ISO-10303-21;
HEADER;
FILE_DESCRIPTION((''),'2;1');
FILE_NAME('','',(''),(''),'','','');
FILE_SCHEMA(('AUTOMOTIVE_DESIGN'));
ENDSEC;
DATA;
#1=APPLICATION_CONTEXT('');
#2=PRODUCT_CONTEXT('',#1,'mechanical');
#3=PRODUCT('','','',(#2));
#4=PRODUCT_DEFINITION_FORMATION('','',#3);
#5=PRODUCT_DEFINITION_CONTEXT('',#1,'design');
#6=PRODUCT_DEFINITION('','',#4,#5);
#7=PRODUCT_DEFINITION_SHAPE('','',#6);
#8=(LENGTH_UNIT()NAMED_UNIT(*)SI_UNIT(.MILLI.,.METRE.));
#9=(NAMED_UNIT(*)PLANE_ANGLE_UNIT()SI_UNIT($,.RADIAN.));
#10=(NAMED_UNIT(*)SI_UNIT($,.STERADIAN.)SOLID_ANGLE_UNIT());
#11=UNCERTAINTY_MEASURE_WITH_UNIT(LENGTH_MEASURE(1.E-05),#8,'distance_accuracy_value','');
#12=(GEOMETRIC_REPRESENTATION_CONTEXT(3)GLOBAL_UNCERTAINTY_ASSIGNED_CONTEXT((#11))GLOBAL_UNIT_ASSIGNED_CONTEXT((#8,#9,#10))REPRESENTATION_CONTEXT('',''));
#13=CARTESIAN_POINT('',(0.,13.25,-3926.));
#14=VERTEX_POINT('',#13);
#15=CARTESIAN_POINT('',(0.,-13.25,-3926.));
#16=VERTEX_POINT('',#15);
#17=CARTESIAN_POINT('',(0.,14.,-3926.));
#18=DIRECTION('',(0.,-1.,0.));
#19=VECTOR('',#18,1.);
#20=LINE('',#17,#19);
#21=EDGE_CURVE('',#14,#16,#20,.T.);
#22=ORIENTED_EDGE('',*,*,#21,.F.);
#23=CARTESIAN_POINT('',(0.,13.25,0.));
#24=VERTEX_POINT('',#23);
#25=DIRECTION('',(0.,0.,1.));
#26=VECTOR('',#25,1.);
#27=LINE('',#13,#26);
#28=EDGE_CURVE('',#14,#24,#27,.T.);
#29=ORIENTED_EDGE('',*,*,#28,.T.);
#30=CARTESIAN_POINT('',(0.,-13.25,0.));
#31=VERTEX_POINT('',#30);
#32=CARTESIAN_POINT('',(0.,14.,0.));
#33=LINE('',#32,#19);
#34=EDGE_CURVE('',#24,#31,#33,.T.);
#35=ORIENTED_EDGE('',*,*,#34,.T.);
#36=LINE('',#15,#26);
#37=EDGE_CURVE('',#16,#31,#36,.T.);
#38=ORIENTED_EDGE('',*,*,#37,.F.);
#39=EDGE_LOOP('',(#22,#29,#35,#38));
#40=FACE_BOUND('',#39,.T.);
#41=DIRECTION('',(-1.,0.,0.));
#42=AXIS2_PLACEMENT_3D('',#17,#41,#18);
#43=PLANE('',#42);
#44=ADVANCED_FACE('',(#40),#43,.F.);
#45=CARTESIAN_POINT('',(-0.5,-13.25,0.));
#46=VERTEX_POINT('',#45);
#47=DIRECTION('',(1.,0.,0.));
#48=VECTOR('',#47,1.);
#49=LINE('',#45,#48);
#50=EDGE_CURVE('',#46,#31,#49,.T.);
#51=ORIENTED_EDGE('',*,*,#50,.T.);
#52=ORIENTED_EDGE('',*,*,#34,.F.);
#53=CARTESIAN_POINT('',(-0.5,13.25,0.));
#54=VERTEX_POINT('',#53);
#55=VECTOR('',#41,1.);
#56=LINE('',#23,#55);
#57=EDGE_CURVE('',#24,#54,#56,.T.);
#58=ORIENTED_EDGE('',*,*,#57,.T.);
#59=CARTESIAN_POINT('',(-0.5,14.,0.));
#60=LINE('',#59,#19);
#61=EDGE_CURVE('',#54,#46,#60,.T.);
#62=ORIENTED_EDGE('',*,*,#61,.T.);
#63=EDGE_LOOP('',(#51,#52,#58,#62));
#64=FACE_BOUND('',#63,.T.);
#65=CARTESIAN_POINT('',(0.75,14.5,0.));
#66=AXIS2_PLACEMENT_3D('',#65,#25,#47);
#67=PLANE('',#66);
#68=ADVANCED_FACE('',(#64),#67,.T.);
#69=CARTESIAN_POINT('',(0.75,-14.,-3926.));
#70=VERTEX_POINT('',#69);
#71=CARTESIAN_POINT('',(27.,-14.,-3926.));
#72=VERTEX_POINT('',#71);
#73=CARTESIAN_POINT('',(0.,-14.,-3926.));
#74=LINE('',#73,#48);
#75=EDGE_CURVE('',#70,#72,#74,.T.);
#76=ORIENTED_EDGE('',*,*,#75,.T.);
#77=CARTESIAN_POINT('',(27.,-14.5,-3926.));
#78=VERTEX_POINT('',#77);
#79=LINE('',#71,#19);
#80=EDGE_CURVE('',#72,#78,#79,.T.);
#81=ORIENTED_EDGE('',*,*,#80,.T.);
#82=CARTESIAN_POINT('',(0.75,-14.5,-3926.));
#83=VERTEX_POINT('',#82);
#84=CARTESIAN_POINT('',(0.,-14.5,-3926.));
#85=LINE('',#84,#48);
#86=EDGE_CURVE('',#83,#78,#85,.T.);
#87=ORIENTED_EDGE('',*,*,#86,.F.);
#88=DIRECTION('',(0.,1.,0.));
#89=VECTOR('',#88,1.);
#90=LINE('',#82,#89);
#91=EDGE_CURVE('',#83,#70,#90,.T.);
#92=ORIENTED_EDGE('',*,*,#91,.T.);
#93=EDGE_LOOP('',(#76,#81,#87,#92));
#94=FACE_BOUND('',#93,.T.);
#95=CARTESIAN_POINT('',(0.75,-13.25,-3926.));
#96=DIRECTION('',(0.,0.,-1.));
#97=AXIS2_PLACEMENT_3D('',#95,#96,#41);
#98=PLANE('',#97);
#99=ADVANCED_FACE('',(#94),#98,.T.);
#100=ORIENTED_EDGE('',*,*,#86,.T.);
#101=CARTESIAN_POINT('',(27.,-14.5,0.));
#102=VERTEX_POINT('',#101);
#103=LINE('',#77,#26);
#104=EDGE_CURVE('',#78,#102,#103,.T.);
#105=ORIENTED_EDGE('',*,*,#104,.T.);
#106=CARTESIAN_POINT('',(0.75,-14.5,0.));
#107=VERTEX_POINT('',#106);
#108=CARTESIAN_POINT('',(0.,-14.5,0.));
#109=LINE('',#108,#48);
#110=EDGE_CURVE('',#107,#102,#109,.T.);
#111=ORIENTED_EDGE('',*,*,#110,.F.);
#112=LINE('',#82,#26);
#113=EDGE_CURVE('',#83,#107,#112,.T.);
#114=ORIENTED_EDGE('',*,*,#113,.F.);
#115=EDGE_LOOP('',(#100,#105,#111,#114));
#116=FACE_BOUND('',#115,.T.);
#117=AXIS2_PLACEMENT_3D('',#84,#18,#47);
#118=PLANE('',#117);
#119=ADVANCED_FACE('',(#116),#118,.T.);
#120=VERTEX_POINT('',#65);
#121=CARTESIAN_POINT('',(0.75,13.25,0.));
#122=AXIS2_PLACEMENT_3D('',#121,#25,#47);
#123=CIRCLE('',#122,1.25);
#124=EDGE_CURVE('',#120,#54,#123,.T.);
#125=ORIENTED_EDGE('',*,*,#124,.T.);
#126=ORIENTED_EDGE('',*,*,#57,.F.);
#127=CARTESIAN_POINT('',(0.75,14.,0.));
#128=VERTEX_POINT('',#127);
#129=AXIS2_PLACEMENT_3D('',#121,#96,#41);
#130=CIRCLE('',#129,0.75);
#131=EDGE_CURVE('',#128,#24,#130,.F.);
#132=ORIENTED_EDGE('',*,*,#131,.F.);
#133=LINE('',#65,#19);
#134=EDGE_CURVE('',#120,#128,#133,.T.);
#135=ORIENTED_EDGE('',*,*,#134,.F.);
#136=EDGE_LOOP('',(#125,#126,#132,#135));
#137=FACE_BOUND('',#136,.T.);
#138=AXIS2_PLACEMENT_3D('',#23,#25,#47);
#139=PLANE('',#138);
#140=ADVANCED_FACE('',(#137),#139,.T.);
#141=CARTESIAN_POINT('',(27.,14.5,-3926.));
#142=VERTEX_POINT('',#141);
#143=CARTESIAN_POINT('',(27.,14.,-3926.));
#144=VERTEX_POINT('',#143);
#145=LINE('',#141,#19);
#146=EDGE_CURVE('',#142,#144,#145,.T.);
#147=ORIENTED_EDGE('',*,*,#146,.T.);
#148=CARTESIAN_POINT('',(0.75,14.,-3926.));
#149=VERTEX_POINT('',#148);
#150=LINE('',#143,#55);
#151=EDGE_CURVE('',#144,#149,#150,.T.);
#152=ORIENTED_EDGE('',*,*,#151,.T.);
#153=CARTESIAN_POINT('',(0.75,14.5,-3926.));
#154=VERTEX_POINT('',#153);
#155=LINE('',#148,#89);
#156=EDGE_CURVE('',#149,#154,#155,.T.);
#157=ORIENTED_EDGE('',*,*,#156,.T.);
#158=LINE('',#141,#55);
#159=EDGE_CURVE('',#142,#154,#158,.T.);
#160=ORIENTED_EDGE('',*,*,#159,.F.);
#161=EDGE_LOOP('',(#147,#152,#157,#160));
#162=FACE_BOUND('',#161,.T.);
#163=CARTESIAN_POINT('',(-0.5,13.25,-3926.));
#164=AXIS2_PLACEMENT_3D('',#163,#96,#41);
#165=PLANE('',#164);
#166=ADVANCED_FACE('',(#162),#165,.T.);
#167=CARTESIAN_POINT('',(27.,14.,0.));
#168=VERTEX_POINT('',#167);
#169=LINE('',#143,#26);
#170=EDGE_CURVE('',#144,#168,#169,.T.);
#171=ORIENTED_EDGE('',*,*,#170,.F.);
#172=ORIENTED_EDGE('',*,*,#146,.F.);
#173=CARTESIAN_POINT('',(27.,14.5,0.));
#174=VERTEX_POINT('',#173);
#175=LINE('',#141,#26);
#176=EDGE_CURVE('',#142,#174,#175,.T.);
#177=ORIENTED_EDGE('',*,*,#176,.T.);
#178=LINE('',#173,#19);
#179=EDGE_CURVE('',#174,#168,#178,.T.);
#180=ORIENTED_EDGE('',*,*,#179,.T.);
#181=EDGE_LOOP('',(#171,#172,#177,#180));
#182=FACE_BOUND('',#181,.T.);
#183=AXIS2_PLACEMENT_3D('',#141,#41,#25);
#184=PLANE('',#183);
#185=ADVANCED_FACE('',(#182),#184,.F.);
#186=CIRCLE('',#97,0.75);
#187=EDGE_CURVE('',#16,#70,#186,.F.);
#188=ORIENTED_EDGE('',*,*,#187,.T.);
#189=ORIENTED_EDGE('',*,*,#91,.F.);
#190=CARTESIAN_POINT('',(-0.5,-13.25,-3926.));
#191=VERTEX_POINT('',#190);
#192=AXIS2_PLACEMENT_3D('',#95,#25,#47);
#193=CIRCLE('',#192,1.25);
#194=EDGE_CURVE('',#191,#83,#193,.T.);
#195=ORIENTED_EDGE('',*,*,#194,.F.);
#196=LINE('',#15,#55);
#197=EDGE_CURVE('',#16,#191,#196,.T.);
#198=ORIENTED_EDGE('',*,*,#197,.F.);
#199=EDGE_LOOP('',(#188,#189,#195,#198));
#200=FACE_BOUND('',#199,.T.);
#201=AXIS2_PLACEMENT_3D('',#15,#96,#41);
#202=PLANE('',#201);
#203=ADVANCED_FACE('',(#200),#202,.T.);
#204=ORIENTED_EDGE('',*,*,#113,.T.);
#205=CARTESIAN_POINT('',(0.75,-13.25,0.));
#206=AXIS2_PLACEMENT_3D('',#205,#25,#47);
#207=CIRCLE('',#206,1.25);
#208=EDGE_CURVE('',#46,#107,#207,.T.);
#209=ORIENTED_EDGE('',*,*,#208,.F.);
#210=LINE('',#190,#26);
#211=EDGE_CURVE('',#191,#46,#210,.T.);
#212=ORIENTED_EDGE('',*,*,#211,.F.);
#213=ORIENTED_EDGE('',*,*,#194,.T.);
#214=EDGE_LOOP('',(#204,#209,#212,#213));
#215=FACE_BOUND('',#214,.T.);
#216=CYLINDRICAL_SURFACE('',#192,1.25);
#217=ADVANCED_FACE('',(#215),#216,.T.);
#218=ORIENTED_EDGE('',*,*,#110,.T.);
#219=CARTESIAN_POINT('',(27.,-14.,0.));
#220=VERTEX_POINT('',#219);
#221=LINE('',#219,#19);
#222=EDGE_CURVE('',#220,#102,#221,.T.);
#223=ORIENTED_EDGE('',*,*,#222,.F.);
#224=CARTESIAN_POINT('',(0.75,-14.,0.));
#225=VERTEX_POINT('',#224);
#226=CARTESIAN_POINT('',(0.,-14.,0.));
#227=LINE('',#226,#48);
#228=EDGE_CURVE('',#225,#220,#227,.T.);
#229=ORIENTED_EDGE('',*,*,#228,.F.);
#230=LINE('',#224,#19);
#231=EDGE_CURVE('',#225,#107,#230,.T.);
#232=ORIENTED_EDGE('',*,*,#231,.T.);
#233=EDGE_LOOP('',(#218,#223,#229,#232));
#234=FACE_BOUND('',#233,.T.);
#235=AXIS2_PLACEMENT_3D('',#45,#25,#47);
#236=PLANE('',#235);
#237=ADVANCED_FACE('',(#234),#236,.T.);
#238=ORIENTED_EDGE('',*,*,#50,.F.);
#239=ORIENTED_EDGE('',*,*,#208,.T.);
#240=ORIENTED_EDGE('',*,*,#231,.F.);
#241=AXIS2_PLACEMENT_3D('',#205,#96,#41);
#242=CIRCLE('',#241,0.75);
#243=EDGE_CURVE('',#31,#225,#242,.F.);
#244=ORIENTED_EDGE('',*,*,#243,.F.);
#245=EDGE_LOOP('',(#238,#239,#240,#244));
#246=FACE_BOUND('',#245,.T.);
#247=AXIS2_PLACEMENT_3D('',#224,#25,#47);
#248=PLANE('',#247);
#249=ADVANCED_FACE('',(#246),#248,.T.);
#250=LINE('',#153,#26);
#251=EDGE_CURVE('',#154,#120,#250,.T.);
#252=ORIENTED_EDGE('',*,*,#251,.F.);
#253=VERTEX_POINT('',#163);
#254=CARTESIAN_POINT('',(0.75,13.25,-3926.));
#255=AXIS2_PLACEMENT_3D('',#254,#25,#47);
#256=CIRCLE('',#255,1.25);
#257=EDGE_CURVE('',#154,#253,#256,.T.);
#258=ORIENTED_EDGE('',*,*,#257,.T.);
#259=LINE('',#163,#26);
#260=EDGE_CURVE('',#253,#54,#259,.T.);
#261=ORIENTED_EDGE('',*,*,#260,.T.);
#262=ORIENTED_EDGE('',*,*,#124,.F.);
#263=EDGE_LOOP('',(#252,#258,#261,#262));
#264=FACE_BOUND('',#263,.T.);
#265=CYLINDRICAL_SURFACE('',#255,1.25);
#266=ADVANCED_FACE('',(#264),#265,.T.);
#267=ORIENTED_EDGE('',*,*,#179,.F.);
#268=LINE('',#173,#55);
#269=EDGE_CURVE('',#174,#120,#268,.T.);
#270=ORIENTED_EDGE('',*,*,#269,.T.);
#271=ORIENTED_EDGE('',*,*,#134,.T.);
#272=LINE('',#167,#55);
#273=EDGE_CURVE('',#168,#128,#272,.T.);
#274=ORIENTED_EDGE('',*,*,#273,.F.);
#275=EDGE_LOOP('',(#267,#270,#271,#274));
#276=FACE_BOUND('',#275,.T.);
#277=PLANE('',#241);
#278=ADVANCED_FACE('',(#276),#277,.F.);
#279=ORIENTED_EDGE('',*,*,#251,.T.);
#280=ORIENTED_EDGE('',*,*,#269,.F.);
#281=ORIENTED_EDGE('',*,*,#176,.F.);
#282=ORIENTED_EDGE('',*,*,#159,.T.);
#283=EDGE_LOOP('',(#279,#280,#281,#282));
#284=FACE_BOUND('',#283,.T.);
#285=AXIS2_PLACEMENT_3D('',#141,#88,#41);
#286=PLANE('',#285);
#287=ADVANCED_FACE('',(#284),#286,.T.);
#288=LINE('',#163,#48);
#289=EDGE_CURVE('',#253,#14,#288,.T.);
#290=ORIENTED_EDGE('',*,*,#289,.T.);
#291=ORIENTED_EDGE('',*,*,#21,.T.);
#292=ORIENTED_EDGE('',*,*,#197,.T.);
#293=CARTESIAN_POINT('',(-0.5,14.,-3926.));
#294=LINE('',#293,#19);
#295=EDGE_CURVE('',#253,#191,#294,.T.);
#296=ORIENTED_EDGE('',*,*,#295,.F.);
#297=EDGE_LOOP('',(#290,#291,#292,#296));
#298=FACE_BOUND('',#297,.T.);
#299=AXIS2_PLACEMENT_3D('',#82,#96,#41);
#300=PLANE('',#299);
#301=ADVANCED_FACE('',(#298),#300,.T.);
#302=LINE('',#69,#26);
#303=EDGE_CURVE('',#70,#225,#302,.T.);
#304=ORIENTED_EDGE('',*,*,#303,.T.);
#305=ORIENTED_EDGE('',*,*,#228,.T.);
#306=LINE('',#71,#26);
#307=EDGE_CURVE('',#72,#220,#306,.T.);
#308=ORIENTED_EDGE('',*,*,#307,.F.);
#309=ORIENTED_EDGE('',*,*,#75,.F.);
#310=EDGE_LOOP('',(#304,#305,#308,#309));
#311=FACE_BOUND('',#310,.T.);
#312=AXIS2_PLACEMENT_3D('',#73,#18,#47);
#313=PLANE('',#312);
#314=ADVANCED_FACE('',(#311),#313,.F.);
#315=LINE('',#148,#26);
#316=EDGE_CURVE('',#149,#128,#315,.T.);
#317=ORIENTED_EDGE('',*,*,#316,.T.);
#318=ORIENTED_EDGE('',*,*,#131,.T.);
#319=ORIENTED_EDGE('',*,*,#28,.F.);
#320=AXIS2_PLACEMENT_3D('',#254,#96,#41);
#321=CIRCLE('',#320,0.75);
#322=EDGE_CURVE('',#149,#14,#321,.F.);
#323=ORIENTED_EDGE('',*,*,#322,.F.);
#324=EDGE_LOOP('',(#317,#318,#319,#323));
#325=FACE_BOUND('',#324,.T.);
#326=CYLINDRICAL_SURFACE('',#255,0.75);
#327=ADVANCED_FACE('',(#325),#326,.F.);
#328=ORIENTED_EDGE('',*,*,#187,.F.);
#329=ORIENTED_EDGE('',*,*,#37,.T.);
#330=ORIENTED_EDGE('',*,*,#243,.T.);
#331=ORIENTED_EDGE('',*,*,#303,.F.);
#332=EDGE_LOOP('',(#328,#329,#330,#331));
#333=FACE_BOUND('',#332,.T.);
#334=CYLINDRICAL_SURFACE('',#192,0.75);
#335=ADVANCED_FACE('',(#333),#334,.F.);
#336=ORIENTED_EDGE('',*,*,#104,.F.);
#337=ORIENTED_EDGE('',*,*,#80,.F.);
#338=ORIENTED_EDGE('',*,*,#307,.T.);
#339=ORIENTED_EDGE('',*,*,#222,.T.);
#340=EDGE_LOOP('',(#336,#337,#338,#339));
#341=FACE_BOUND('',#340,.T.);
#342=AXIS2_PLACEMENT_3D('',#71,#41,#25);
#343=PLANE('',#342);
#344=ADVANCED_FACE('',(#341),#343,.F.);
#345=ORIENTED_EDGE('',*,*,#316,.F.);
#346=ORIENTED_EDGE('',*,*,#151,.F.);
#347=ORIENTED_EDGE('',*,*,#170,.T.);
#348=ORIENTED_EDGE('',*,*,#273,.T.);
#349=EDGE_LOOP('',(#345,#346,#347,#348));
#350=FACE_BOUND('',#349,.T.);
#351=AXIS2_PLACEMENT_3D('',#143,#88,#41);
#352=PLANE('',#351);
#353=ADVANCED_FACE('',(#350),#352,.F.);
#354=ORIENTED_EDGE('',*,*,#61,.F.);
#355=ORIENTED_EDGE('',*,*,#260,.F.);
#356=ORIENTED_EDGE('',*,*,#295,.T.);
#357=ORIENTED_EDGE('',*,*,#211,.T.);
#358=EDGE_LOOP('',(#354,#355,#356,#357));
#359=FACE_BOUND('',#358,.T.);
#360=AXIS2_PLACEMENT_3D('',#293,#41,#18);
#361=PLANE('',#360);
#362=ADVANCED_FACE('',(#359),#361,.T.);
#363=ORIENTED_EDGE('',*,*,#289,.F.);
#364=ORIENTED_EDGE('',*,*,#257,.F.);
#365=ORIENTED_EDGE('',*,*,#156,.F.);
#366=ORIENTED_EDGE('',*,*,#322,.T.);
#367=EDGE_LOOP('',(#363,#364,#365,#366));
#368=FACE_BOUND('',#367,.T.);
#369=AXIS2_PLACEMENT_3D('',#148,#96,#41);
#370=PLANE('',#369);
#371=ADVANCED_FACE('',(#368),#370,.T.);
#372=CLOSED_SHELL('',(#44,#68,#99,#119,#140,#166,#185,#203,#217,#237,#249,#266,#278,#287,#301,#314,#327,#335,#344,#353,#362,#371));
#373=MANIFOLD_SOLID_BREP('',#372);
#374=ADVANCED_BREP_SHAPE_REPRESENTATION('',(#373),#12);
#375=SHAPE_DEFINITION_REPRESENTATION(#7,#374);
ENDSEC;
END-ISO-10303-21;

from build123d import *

# Parameters (mm, degrees)
SM_BASE_FLANGE_1_DEPTH = 3926


# Sheet-metal steps are written as plain solids
with BuildPart() as part:
    # Sketch 1 → Базовая кромка1 (new body)
    with BuildSketch(Plane.XY):
        with BuildLine():
            Line((27, 14), (0.75, 14))
            ThreePointArc((0.75, 14), (0.219669914, 13.780330086), (0, 13.25))
            Line((0, 13.25), (0, -13.25))
            ThreePointArc((0, -13.25), (0.219669914, -13.780330086), (0.75, -14))
            Line((0.75, -14), (27, -14))
            Line((27, -14), (27, -14.5))
            Line((27, -14.5), (0.75, -14.5))
            ThreePointArc((0.75, -14.5), (-0.133883476, -14.133883476), (-0.5, -13.25))
            Line((-0.5, -13.25), (-0.5, 13.25))
            ThreePointArc((-0.5, 13.25), (-0.133883476, 14.133883476), (0.75, 14.5))
            Line((0.75, 14.5), (27, 14.5))
            Line((27, 14.5), (27, 14))
        make_face()
    extrude(amount=-SM_BASE_FLANGE_1_DEPTH)


solid = part.part
